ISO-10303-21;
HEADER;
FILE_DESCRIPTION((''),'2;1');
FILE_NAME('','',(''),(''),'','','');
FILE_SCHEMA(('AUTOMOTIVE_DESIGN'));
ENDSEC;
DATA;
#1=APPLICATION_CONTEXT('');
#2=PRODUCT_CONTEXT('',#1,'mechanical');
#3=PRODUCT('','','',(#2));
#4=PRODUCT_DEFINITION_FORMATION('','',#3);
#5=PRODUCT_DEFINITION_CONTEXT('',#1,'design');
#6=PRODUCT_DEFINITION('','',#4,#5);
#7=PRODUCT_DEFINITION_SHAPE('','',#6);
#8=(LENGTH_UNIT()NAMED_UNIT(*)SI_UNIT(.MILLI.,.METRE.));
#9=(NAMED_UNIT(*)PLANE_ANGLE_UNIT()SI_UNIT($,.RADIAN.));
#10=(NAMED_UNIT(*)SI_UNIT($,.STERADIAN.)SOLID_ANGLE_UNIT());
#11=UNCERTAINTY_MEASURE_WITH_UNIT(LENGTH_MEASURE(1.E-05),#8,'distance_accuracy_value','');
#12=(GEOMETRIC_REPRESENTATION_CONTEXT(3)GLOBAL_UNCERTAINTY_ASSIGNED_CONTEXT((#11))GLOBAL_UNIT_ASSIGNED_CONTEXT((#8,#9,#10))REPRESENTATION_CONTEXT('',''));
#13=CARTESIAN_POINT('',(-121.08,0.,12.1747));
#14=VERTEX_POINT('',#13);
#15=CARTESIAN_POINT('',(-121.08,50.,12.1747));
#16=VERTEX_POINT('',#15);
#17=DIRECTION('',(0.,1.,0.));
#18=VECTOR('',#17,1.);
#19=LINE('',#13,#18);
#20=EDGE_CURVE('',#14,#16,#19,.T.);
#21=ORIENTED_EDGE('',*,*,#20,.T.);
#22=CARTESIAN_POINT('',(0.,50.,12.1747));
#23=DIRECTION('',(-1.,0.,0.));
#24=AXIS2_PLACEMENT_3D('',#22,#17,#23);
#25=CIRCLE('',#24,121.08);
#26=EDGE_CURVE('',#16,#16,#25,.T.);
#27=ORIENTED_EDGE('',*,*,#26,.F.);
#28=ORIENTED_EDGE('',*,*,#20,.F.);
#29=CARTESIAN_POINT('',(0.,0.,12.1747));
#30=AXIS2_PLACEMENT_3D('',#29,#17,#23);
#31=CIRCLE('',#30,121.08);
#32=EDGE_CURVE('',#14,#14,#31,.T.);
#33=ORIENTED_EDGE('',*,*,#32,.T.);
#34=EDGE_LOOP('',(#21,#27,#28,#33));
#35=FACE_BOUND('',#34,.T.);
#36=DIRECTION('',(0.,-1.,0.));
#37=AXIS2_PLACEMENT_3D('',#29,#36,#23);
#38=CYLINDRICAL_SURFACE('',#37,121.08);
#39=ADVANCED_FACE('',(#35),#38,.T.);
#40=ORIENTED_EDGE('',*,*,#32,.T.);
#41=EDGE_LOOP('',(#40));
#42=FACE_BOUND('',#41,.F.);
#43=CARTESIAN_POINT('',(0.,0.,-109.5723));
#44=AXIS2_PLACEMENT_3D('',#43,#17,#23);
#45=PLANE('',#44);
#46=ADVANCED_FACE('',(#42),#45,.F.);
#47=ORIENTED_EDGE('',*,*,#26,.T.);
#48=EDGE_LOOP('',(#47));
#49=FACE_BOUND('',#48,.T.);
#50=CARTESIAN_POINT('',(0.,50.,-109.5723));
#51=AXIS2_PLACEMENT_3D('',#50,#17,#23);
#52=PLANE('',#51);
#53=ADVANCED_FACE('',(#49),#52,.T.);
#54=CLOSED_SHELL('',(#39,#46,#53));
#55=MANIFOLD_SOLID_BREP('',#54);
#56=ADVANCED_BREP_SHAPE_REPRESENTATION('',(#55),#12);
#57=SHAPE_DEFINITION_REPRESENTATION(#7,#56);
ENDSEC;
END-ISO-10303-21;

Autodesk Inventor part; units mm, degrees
ref_plane "YZ Plane" through (0, 0, 0) normal (1, 0, 0) x (0, 1, 0)
ref_plane "XZ Plane" through (0, 0, 0) normal (0, 1, 0) x (-1, 0, 0)
ref_plane "XY Plane" through (0, 0, 0) normal (0, 0, 1) x (1, 0, 0)
sketch "Sketch1" plane through (0, 0, 0) normal (0, 1, 0) x (-1, 0, 0)
  circle A0 centre (0, 12.1747) radius 12.108
  arc A1 (7.1431, 10.8771) -> (-7.6488, 10.8771) centre (-0.2529, 11.8554) ccw
  point P0 (0, 0)
extrude "Extrusion1" add sketch "Sketch1" along normal blind 5
sketch "Sketch2" plane through (0, 0, 12.1747) normal (0, -1, 0) x (1, 0, 0)
  point P0 (0, -12.1747)
sketch "Sketch3" plane through (0, 5, 12.1747) normal (0, 1, 0) x (1, 0, 0)
  point P0 (0, 12.1747)
sketch "Sketch4" plane through (0, 0, 0) normal (0, 1, 0) x (-1, 0, 0)
  arc A0 (2.5285, 18.8375) -> (2.5917, 4.9938) centre (-0.8103, 11.9003) ccw
  point P0 (0, 0)
scale "Scale1" factors (5, 5, 5) then translate (0, 0, -48.6988) bodies 1
scale "Scale2" factors (2, 2, 2) then translate (0, 0, -12.1747) bodies 1
properties part number "drum"
